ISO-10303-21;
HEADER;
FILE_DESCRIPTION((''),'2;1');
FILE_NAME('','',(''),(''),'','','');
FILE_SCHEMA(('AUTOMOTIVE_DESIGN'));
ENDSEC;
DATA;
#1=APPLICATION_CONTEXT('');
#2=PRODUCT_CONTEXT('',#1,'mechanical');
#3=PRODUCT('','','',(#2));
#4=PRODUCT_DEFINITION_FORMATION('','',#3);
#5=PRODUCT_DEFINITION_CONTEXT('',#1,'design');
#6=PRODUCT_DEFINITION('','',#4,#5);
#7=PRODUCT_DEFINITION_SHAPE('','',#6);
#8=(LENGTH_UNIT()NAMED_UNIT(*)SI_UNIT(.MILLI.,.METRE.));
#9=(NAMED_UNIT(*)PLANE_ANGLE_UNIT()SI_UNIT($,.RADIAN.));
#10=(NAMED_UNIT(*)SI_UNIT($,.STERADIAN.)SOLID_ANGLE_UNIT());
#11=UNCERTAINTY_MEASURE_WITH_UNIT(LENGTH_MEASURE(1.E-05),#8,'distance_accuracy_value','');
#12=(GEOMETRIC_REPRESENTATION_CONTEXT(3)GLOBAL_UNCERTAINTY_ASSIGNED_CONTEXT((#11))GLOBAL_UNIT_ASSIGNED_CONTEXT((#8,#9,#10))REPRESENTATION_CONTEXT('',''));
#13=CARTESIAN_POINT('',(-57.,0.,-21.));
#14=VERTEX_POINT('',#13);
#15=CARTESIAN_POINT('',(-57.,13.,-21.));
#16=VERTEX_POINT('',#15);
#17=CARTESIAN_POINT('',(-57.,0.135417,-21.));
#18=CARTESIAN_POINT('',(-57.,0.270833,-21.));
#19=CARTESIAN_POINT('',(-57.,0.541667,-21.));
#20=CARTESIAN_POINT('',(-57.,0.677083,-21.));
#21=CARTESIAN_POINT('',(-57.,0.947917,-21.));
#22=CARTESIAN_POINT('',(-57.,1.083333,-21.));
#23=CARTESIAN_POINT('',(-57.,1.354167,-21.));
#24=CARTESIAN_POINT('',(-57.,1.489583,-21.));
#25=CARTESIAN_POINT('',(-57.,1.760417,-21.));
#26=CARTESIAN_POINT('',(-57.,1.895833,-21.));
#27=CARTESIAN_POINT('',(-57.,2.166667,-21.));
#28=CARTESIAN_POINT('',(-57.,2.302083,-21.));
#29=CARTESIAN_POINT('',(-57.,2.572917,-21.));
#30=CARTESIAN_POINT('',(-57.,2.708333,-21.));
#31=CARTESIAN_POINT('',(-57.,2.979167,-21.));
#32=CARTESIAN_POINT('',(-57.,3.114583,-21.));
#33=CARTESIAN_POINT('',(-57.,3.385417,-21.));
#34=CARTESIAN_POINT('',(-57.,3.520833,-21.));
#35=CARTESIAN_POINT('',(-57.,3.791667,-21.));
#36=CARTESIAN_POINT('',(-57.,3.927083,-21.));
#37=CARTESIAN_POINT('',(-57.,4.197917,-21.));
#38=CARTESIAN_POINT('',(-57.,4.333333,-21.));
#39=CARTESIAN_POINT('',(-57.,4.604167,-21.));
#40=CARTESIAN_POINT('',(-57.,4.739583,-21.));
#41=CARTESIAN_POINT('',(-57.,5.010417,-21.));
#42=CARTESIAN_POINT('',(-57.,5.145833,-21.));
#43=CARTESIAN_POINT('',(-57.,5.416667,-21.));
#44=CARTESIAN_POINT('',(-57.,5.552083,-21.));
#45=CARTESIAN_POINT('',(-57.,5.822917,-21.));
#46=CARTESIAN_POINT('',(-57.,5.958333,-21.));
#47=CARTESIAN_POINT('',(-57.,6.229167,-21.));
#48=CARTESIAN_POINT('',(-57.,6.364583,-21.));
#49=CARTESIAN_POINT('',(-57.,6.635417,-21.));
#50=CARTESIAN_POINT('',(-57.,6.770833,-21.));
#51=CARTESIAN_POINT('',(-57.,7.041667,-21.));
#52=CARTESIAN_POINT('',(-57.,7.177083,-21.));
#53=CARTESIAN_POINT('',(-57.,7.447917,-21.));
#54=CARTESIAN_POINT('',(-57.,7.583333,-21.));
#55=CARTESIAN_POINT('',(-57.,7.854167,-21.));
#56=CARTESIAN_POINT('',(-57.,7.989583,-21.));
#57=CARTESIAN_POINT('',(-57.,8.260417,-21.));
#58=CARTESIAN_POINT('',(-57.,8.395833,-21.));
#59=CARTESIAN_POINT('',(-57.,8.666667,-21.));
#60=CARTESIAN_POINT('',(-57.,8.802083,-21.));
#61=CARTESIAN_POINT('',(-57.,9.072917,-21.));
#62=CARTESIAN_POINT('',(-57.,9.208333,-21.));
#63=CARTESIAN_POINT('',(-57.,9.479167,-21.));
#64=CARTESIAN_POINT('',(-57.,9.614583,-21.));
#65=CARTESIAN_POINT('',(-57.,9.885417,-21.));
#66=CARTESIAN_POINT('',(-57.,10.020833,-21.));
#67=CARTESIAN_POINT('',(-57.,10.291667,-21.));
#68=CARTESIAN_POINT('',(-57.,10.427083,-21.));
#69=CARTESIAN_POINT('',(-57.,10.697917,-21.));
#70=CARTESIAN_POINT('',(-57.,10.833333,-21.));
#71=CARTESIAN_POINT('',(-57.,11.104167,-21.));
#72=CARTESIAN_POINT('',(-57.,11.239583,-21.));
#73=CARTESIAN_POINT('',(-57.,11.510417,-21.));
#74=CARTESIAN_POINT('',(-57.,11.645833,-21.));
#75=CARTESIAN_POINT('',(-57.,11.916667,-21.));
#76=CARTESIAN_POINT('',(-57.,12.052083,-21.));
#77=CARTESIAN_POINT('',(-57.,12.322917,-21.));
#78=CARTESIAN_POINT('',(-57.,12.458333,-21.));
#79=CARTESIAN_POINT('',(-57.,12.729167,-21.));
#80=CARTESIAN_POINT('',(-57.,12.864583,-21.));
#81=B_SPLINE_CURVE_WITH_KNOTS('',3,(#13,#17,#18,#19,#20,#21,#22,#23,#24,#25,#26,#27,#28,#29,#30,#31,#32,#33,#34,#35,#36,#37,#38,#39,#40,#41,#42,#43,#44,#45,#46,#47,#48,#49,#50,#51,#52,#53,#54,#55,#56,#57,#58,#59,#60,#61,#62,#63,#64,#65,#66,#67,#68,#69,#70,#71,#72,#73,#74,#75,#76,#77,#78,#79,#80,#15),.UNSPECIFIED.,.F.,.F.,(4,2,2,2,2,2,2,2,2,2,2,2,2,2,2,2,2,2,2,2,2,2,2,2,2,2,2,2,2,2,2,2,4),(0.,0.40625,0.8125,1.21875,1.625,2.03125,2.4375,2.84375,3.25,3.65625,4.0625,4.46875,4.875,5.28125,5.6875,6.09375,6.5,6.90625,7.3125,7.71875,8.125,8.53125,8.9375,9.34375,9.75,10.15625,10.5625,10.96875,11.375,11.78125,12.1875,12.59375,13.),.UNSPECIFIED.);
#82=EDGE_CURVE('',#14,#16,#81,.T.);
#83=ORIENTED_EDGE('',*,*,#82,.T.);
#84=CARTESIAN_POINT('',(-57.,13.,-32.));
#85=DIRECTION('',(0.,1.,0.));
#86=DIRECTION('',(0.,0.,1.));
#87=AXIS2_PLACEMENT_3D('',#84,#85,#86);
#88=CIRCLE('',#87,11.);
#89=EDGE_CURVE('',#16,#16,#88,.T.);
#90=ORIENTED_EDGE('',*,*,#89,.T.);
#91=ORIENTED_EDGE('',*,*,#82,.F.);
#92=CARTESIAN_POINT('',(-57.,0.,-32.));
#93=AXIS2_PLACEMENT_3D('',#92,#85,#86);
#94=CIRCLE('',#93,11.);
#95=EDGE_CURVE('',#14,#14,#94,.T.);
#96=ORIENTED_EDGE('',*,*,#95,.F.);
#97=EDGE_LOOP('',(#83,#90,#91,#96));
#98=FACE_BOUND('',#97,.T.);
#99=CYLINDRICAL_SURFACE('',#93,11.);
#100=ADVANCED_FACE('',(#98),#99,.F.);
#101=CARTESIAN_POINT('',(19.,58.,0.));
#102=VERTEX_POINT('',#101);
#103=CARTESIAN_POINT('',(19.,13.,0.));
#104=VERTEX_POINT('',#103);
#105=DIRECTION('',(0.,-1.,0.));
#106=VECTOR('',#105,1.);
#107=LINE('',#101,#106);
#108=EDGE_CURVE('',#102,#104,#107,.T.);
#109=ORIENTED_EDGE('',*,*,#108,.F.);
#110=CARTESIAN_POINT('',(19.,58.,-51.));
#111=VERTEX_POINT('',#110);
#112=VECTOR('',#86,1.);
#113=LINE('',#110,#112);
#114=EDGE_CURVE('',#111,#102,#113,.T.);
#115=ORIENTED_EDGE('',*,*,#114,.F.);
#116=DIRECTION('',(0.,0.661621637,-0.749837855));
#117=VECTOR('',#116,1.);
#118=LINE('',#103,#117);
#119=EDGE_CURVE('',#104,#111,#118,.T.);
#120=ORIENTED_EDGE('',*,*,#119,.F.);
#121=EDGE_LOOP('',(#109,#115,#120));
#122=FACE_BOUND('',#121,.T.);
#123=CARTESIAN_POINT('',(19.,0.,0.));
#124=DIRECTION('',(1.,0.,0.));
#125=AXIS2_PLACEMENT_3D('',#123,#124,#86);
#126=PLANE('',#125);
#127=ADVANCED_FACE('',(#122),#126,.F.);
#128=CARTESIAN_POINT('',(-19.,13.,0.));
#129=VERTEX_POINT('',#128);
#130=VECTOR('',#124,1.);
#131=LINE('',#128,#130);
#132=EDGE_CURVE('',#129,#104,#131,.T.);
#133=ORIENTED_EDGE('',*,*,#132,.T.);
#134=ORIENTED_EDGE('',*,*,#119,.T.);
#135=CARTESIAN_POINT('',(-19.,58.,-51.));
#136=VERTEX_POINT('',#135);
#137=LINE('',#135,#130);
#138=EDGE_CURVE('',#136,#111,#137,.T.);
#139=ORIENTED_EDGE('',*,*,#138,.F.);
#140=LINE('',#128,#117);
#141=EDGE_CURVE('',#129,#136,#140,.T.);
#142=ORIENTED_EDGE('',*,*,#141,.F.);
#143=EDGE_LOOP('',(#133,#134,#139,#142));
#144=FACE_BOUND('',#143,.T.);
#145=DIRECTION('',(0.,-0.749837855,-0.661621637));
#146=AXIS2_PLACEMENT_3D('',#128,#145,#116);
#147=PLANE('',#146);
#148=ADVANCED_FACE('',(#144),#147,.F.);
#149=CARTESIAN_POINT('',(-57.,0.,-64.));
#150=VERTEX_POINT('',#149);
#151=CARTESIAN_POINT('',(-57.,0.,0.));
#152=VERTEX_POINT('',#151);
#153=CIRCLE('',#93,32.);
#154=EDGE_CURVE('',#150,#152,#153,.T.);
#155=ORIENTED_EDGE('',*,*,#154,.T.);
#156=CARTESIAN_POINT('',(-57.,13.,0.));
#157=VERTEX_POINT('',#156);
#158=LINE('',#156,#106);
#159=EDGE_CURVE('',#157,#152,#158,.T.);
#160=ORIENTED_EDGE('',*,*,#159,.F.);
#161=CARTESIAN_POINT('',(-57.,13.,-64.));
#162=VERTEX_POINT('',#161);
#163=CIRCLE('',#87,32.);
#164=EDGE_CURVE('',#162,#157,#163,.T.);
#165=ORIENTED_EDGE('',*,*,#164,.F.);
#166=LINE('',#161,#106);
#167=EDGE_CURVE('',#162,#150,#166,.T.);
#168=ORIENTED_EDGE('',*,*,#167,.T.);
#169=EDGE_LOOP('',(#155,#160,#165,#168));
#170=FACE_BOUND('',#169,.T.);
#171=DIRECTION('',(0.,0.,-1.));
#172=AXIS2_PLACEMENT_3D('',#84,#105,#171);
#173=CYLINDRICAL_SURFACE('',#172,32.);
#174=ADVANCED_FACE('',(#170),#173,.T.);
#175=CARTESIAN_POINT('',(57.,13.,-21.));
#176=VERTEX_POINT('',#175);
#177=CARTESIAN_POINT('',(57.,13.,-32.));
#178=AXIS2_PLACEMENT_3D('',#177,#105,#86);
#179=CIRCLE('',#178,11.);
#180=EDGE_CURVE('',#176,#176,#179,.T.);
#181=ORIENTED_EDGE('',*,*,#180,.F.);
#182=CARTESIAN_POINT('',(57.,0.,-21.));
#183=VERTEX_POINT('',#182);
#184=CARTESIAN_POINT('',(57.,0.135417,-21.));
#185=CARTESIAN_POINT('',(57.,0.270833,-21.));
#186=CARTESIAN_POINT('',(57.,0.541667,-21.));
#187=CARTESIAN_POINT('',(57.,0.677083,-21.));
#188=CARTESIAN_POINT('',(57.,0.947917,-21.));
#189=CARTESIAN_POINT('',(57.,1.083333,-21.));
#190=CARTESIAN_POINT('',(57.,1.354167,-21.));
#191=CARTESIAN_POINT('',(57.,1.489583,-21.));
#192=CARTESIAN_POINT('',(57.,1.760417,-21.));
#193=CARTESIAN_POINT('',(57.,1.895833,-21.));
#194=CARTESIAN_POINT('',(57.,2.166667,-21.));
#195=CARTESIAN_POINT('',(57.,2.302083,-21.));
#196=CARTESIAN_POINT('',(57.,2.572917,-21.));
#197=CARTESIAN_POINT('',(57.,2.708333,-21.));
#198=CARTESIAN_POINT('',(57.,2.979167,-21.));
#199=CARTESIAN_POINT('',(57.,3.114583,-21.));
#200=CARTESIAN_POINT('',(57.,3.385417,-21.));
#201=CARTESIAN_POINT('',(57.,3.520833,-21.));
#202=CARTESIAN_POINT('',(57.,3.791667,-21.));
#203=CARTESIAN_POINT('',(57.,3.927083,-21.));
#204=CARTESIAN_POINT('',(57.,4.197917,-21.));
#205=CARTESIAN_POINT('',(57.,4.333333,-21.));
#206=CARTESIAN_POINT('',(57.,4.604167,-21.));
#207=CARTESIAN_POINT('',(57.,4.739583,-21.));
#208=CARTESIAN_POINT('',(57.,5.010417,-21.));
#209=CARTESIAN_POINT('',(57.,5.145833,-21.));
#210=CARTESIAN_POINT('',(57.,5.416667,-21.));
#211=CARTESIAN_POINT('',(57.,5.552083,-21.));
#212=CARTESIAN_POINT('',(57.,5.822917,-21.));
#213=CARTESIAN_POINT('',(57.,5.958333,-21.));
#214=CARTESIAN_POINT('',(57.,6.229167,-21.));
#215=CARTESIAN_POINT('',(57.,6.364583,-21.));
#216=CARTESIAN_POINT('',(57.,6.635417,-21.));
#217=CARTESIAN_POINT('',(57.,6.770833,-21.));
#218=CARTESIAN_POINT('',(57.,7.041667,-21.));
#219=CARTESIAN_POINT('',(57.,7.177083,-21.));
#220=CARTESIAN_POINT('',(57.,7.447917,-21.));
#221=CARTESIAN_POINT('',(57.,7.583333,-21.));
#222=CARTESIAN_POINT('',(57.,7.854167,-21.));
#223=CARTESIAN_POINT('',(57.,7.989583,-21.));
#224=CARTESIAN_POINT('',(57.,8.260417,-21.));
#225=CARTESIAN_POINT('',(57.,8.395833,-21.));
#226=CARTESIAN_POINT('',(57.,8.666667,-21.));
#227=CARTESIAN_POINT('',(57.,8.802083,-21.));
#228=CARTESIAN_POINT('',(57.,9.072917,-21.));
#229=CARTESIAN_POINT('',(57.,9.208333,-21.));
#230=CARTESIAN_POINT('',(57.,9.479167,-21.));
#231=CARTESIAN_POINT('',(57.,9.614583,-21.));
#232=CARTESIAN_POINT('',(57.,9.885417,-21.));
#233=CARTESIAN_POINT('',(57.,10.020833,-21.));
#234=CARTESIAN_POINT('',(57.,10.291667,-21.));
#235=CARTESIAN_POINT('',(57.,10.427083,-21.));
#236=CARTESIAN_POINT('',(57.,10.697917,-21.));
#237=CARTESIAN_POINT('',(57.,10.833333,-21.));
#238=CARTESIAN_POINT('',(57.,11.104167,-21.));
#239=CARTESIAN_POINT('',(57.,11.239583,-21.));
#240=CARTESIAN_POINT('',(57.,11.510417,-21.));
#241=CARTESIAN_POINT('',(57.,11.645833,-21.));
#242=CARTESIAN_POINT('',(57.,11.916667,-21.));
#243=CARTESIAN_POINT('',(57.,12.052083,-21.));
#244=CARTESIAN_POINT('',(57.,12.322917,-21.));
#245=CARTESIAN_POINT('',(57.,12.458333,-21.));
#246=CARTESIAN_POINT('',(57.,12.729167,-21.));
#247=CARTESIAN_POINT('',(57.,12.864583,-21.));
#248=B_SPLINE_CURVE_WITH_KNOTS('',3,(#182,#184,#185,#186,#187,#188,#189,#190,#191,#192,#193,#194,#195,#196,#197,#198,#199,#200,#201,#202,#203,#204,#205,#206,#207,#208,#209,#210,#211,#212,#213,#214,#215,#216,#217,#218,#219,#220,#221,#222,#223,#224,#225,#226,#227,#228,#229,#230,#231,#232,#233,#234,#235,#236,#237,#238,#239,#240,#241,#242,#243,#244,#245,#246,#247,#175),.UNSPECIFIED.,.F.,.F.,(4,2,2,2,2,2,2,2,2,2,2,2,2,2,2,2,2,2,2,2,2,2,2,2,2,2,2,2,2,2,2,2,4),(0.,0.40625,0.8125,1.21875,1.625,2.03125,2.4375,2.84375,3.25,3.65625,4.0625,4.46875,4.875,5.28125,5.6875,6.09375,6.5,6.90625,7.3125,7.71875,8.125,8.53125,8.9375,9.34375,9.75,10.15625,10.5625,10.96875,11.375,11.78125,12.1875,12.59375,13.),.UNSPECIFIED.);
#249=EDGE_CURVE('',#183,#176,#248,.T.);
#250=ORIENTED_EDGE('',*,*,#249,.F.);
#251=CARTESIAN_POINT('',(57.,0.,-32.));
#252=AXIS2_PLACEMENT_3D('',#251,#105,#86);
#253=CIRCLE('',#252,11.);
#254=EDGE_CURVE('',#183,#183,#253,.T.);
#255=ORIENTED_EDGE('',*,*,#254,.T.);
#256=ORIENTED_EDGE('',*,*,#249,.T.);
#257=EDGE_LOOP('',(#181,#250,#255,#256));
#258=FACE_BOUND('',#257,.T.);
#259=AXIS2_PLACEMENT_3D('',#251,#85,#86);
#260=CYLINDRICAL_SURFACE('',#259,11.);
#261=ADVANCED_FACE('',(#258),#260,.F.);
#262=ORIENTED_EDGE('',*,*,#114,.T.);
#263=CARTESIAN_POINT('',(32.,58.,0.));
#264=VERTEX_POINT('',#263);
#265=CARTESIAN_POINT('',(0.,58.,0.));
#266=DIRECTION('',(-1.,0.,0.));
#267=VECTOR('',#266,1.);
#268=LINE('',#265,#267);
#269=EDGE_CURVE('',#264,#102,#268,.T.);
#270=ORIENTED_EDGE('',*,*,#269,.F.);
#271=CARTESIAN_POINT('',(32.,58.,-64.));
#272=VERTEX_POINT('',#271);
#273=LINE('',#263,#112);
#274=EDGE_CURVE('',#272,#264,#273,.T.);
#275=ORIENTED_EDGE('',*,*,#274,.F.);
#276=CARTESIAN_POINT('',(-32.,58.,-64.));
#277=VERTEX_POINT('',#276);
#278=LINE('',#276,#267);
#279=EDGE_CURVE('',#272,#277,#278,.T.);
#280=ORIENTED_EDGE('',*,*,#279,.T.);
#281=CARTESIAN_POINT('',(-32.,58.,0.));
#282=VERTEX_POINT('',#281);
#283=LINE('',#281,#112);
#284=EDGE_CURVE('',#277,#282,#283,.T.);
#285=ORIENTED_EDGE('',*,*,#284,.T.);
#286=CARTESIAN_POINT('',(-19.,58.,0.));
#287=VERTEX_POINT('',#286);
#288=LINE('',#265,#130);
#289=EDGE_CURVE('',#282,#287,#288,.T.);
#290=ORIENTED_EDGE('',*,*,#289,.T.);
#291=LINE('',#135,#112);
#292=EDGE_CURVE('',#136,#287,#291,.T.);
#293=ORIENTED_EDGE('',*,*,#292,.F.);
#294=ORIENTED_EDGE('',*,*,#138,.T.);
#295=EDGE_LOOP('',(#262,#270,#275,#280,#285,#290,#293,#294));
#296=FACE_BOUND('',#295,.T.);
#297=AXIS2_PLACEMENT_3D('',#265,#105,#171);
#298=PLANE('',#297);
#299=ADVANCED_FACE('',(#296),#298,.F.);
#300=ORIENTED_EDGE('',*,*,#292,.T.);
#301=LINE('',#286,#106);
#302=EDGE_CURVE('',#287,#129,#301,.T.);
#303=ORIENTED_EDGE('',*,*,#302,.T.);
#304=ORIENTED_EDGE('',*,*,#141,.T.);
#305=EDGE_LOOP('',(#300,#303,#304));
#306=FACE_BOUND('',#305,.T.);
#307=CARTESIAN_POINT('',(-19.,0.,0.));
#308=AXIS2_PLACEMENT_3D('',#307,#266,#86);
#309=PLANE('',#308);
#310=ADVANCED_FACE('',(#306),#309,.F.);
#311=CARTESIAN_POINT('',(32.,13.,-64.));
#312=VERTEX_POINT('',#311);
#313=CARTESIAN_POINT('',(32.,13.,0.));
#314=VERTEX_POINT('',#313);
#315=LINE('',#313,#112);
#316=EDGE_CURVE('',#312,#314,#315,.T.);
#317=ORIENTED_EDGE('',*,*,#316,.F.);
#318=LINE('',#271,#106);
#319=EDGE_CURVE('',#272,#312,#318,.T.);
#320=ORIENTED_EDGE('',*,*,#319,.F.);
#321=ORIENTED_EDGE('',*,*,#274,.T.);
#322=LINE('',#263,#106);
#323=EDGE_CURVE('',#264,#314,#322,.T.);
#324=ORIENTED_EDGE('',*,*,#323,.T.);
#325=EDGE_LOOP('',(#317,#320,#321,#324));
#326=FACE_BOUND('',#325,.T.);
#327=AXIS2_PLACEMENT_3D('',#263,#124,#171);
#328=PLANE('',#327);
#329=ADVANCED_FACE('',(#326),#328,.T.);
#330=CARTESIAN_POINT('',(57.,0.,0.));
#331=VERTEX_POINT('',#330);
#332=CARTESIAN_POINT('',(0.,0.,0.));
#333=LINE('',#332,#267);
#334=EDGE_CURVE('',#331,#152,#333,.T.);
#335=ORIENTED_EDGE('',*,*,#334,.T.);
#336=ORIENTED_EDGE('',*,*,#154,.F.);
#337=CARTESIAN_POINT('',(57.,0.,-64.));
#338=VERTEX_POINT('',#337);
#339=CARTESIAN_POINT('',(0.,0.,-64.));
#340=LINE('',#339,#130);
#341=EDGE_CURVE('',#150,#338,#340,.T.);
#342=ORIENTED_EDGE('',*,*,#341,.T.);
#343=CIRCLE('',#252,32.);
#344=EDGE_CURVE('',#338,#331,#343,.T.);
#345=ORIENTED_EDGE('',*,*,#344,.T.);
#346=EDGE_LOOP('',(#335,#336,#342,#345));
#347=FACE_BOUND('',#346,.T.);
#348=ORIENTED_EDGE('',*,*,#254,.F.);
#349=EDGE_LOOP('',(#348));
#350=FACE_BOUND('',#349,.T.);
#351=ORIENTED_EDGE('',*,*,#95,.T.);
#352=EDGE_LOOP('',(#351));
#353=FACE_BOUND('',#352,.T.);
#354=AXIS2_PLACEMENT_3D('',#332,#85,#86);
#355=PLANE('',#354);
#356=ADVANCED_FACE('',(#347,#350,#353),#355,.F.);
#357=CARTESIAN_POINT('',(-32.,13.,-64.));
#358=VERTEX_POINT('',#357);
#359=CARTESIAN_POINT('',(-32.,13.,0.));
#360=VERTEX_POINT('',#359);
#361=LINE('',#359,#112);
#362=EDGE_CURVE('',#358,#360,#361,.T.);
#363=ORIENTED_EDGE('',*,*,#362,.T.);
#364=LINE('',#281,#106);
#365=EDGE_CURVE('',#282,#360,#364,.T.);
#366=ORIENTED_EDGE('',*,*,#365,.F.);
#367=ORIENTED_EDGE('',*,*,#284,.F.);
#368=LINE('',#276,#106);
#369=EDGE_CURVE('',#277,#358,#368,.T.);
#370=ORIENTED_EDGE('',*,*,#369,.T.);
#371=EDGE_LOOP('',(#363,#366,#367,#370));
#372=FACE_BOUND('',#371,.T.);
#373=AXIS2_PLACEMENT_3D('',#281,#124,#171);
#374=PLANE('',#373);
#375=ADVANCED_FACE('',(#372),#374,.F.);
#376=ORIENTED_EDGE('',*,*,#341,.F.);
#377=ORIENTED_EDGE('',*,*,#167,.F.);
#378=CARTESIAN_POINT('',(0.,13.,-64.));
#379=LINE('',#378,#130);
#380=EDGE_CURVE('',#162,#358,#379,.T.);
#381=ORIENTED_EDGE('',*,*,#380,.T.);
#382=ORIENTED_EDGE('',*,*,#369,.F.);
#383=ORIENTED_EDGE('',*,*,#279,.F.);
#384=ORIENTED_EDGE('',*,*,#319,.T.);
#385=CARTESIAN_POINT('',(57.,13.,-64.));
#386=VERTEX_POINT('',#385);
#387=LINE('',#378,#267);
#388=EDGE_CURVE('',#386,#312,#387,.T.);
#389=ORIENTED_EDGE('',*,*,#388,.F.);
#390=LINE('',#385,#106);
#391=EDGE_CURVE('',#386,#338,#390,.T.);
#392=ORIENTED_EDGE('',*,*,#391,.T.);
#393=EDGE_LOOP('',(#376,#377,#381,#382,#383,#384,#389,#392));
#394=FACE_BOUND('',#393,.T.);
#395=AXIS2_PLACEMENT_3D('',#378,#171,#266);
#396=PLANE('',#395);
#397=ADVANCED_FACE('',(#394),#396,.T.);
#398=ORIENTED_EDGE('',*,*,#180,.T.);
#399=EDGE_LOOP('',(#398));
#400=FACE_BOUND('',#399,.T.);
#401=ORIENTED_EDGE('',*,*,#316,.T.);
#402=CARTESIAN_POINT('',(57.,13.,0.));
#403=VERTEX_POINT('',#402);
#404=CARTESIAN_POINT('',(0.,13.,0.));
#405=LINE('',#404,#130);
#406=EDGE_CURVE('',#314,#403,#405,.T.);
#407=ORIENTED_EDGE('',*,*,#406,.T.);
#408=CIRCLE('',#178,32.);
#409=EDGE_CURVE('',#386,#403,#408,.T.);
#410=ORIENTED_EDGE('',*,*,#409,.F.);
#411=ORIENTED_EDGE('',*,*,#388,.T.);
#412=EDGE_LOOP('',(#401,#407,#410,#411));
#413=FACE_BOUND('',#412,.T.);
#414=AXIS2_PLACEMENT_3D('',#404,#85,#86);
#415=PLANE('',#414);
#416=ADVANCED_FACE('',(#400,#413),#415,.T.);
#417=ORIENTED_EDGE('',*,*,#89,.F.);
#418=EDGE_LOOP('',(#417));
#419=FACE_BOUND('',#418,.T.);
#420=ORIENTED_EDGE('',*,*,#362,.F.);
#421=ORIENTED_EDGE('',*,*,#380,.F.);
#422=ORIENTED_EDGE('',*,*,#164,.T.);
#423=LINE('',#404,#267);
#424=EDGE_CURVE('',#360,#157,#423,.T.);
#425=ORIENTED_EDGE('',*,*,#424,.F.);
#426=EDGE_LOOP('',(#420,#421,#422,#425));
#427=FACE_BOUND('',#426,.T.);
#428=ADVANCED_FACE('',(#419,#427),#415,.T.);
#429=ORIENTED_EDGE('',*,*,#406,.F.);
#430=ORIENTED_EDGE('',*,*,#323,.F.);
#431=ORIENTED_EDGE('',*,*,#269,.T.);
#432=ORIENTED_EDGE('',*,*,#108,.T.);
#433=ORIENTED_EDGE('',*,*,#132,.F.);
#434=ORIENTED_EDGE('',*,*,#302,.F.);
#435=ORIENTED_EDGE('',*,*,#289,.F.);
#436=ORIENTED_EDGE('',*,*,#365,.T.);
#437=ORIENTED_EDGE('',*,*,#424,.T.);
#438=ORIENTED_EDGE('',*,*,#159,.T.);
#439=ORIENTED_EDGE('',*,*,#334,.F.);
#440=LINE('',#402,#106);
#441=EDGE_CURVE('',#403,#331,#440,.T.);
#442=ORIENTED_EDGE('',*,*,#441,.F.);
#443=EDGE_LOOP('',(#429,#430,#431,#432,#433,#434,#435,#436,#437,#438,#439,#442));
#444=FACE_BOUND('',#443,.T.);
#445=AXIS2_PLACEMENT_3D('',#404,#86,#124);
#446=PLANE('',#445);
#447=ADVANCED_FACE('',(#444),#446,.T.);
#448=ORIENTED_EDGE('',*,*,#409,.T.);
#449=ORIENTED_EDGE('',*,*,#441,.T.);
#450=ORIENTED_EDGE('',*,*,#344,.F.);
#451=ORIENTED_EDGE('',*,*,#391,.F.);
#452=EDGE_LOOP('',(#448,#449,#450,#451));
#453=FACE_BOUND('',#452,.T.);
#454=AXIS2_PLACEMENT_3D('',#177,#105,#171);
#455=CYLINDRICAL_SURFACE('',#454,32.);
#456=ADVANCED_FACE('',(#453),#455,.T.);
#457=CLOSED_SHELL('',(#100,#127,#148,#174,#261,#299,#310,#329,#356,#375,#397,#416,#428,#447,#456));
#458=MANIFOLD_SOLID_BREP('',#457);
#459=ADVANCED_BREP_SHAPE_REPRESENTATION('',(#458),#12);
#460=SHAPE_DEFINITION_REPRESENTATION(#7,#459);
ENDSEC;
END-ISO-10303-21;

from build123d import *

# Parameters (mm, degrees)
BOSS_EXTRUDE1_DEPTH = 13
SKETCH2_R           = 11
CUT_EXTRUDE1_DEPTH  = 111.390216958
SKETCH3_W           = 32
SKETCH3_H           = 64
BOSS_EXTRUDE2_DEPTH = 45
CUT_EXTRUDE2_DEPTH  = 19


with BuildPart() as part:
    # Sketch1 → Boss-Extrude1 (new body)
    with BuildSketch(Plane(origin=(0, 0, 0), x_dir=(1, 0, 0), z_dir=(0, 1, 0))):
        with BuildLine():
            Line((-57, 0), (0, 0))
            Line((0, 0), (0, 64))
            Line((0, 64), (-57, 64))
            ThreePointArc((-57, 64), (-89, 32), (-57, 0))
        make_face()
    boss_extrude1 = extrude(amount=BOSS_EXTRUDE1_DEPTH)

    # Sketch2 → Cut-Extrude1 (cut, through all)
    with BuildSketch(Plane(origin=(0, 13, 0), x_dir=(1, 0, 0), z_dir=(0, 1, 0))):
        with Locations((-57, 32)):
            Circle(SKETCH2_R)
    cut_extrude1 = extrude(amount=-CUT_EXTRUDE1_DEPTH, mode=Mode.SUBTRACT)

    # Sketch3 → Boss-Extrude2 (add)
    with BuildSketch(Plane(origin=(0, 13, 0), x_dir=(1, 0, 0), z_dir=(0, 1, 0))):
        with Locations((-16, 32)):
            Rectangle(SKETCH3_W, SKETCH3_H)
    boss_extrude2 = extrude(amount=BOSS_EXTRUDE2_DEPTH)

    # Sketch4 → Cut-Extrude2 (cut)
    with BuildSketch(Plane(origin=(0, 0, 0), x_dir=(0, 0, -1), z_dir=(1, 0, 0))):
        Polygon((0, 13), (51, 58), (0, 58), align=None)
    cut_extrude2 = extrude(amount=-CUT_EXTRUDE2_DEPTH, mode=Mode.SUBTRACT)

    # Mirror1: Boss-Extrude1, Cut-Extrude1, Boss-Extrude2, Cut-Extrude2 across plane
    add(boss_extrude1.mirror(Plane(origin=(0, 0, 0), x_dir=(0, 0, 1), z_dir=(1, 0, 0))))
    add(cut_extrude1.mirror(Plane(origin=(0, 0, 0), x_dir=(0, 0, 1), z_dir=(1, 0, 0))), mode=Mode.SUBTRACT)
    add(boss_extrude2.mirror(Plane(origin=(0, 0, 0), x_dir=(0, 0, 1), z_dir=(1, 0, 0))))
    add(cut_extrude2.mirror(Plane(origin=(0, 0, 0), x_dir=(0, 0, 1), z_dir=(1, 0, 0))), mode=Mode.SUBTRACT)


solid = part.part
